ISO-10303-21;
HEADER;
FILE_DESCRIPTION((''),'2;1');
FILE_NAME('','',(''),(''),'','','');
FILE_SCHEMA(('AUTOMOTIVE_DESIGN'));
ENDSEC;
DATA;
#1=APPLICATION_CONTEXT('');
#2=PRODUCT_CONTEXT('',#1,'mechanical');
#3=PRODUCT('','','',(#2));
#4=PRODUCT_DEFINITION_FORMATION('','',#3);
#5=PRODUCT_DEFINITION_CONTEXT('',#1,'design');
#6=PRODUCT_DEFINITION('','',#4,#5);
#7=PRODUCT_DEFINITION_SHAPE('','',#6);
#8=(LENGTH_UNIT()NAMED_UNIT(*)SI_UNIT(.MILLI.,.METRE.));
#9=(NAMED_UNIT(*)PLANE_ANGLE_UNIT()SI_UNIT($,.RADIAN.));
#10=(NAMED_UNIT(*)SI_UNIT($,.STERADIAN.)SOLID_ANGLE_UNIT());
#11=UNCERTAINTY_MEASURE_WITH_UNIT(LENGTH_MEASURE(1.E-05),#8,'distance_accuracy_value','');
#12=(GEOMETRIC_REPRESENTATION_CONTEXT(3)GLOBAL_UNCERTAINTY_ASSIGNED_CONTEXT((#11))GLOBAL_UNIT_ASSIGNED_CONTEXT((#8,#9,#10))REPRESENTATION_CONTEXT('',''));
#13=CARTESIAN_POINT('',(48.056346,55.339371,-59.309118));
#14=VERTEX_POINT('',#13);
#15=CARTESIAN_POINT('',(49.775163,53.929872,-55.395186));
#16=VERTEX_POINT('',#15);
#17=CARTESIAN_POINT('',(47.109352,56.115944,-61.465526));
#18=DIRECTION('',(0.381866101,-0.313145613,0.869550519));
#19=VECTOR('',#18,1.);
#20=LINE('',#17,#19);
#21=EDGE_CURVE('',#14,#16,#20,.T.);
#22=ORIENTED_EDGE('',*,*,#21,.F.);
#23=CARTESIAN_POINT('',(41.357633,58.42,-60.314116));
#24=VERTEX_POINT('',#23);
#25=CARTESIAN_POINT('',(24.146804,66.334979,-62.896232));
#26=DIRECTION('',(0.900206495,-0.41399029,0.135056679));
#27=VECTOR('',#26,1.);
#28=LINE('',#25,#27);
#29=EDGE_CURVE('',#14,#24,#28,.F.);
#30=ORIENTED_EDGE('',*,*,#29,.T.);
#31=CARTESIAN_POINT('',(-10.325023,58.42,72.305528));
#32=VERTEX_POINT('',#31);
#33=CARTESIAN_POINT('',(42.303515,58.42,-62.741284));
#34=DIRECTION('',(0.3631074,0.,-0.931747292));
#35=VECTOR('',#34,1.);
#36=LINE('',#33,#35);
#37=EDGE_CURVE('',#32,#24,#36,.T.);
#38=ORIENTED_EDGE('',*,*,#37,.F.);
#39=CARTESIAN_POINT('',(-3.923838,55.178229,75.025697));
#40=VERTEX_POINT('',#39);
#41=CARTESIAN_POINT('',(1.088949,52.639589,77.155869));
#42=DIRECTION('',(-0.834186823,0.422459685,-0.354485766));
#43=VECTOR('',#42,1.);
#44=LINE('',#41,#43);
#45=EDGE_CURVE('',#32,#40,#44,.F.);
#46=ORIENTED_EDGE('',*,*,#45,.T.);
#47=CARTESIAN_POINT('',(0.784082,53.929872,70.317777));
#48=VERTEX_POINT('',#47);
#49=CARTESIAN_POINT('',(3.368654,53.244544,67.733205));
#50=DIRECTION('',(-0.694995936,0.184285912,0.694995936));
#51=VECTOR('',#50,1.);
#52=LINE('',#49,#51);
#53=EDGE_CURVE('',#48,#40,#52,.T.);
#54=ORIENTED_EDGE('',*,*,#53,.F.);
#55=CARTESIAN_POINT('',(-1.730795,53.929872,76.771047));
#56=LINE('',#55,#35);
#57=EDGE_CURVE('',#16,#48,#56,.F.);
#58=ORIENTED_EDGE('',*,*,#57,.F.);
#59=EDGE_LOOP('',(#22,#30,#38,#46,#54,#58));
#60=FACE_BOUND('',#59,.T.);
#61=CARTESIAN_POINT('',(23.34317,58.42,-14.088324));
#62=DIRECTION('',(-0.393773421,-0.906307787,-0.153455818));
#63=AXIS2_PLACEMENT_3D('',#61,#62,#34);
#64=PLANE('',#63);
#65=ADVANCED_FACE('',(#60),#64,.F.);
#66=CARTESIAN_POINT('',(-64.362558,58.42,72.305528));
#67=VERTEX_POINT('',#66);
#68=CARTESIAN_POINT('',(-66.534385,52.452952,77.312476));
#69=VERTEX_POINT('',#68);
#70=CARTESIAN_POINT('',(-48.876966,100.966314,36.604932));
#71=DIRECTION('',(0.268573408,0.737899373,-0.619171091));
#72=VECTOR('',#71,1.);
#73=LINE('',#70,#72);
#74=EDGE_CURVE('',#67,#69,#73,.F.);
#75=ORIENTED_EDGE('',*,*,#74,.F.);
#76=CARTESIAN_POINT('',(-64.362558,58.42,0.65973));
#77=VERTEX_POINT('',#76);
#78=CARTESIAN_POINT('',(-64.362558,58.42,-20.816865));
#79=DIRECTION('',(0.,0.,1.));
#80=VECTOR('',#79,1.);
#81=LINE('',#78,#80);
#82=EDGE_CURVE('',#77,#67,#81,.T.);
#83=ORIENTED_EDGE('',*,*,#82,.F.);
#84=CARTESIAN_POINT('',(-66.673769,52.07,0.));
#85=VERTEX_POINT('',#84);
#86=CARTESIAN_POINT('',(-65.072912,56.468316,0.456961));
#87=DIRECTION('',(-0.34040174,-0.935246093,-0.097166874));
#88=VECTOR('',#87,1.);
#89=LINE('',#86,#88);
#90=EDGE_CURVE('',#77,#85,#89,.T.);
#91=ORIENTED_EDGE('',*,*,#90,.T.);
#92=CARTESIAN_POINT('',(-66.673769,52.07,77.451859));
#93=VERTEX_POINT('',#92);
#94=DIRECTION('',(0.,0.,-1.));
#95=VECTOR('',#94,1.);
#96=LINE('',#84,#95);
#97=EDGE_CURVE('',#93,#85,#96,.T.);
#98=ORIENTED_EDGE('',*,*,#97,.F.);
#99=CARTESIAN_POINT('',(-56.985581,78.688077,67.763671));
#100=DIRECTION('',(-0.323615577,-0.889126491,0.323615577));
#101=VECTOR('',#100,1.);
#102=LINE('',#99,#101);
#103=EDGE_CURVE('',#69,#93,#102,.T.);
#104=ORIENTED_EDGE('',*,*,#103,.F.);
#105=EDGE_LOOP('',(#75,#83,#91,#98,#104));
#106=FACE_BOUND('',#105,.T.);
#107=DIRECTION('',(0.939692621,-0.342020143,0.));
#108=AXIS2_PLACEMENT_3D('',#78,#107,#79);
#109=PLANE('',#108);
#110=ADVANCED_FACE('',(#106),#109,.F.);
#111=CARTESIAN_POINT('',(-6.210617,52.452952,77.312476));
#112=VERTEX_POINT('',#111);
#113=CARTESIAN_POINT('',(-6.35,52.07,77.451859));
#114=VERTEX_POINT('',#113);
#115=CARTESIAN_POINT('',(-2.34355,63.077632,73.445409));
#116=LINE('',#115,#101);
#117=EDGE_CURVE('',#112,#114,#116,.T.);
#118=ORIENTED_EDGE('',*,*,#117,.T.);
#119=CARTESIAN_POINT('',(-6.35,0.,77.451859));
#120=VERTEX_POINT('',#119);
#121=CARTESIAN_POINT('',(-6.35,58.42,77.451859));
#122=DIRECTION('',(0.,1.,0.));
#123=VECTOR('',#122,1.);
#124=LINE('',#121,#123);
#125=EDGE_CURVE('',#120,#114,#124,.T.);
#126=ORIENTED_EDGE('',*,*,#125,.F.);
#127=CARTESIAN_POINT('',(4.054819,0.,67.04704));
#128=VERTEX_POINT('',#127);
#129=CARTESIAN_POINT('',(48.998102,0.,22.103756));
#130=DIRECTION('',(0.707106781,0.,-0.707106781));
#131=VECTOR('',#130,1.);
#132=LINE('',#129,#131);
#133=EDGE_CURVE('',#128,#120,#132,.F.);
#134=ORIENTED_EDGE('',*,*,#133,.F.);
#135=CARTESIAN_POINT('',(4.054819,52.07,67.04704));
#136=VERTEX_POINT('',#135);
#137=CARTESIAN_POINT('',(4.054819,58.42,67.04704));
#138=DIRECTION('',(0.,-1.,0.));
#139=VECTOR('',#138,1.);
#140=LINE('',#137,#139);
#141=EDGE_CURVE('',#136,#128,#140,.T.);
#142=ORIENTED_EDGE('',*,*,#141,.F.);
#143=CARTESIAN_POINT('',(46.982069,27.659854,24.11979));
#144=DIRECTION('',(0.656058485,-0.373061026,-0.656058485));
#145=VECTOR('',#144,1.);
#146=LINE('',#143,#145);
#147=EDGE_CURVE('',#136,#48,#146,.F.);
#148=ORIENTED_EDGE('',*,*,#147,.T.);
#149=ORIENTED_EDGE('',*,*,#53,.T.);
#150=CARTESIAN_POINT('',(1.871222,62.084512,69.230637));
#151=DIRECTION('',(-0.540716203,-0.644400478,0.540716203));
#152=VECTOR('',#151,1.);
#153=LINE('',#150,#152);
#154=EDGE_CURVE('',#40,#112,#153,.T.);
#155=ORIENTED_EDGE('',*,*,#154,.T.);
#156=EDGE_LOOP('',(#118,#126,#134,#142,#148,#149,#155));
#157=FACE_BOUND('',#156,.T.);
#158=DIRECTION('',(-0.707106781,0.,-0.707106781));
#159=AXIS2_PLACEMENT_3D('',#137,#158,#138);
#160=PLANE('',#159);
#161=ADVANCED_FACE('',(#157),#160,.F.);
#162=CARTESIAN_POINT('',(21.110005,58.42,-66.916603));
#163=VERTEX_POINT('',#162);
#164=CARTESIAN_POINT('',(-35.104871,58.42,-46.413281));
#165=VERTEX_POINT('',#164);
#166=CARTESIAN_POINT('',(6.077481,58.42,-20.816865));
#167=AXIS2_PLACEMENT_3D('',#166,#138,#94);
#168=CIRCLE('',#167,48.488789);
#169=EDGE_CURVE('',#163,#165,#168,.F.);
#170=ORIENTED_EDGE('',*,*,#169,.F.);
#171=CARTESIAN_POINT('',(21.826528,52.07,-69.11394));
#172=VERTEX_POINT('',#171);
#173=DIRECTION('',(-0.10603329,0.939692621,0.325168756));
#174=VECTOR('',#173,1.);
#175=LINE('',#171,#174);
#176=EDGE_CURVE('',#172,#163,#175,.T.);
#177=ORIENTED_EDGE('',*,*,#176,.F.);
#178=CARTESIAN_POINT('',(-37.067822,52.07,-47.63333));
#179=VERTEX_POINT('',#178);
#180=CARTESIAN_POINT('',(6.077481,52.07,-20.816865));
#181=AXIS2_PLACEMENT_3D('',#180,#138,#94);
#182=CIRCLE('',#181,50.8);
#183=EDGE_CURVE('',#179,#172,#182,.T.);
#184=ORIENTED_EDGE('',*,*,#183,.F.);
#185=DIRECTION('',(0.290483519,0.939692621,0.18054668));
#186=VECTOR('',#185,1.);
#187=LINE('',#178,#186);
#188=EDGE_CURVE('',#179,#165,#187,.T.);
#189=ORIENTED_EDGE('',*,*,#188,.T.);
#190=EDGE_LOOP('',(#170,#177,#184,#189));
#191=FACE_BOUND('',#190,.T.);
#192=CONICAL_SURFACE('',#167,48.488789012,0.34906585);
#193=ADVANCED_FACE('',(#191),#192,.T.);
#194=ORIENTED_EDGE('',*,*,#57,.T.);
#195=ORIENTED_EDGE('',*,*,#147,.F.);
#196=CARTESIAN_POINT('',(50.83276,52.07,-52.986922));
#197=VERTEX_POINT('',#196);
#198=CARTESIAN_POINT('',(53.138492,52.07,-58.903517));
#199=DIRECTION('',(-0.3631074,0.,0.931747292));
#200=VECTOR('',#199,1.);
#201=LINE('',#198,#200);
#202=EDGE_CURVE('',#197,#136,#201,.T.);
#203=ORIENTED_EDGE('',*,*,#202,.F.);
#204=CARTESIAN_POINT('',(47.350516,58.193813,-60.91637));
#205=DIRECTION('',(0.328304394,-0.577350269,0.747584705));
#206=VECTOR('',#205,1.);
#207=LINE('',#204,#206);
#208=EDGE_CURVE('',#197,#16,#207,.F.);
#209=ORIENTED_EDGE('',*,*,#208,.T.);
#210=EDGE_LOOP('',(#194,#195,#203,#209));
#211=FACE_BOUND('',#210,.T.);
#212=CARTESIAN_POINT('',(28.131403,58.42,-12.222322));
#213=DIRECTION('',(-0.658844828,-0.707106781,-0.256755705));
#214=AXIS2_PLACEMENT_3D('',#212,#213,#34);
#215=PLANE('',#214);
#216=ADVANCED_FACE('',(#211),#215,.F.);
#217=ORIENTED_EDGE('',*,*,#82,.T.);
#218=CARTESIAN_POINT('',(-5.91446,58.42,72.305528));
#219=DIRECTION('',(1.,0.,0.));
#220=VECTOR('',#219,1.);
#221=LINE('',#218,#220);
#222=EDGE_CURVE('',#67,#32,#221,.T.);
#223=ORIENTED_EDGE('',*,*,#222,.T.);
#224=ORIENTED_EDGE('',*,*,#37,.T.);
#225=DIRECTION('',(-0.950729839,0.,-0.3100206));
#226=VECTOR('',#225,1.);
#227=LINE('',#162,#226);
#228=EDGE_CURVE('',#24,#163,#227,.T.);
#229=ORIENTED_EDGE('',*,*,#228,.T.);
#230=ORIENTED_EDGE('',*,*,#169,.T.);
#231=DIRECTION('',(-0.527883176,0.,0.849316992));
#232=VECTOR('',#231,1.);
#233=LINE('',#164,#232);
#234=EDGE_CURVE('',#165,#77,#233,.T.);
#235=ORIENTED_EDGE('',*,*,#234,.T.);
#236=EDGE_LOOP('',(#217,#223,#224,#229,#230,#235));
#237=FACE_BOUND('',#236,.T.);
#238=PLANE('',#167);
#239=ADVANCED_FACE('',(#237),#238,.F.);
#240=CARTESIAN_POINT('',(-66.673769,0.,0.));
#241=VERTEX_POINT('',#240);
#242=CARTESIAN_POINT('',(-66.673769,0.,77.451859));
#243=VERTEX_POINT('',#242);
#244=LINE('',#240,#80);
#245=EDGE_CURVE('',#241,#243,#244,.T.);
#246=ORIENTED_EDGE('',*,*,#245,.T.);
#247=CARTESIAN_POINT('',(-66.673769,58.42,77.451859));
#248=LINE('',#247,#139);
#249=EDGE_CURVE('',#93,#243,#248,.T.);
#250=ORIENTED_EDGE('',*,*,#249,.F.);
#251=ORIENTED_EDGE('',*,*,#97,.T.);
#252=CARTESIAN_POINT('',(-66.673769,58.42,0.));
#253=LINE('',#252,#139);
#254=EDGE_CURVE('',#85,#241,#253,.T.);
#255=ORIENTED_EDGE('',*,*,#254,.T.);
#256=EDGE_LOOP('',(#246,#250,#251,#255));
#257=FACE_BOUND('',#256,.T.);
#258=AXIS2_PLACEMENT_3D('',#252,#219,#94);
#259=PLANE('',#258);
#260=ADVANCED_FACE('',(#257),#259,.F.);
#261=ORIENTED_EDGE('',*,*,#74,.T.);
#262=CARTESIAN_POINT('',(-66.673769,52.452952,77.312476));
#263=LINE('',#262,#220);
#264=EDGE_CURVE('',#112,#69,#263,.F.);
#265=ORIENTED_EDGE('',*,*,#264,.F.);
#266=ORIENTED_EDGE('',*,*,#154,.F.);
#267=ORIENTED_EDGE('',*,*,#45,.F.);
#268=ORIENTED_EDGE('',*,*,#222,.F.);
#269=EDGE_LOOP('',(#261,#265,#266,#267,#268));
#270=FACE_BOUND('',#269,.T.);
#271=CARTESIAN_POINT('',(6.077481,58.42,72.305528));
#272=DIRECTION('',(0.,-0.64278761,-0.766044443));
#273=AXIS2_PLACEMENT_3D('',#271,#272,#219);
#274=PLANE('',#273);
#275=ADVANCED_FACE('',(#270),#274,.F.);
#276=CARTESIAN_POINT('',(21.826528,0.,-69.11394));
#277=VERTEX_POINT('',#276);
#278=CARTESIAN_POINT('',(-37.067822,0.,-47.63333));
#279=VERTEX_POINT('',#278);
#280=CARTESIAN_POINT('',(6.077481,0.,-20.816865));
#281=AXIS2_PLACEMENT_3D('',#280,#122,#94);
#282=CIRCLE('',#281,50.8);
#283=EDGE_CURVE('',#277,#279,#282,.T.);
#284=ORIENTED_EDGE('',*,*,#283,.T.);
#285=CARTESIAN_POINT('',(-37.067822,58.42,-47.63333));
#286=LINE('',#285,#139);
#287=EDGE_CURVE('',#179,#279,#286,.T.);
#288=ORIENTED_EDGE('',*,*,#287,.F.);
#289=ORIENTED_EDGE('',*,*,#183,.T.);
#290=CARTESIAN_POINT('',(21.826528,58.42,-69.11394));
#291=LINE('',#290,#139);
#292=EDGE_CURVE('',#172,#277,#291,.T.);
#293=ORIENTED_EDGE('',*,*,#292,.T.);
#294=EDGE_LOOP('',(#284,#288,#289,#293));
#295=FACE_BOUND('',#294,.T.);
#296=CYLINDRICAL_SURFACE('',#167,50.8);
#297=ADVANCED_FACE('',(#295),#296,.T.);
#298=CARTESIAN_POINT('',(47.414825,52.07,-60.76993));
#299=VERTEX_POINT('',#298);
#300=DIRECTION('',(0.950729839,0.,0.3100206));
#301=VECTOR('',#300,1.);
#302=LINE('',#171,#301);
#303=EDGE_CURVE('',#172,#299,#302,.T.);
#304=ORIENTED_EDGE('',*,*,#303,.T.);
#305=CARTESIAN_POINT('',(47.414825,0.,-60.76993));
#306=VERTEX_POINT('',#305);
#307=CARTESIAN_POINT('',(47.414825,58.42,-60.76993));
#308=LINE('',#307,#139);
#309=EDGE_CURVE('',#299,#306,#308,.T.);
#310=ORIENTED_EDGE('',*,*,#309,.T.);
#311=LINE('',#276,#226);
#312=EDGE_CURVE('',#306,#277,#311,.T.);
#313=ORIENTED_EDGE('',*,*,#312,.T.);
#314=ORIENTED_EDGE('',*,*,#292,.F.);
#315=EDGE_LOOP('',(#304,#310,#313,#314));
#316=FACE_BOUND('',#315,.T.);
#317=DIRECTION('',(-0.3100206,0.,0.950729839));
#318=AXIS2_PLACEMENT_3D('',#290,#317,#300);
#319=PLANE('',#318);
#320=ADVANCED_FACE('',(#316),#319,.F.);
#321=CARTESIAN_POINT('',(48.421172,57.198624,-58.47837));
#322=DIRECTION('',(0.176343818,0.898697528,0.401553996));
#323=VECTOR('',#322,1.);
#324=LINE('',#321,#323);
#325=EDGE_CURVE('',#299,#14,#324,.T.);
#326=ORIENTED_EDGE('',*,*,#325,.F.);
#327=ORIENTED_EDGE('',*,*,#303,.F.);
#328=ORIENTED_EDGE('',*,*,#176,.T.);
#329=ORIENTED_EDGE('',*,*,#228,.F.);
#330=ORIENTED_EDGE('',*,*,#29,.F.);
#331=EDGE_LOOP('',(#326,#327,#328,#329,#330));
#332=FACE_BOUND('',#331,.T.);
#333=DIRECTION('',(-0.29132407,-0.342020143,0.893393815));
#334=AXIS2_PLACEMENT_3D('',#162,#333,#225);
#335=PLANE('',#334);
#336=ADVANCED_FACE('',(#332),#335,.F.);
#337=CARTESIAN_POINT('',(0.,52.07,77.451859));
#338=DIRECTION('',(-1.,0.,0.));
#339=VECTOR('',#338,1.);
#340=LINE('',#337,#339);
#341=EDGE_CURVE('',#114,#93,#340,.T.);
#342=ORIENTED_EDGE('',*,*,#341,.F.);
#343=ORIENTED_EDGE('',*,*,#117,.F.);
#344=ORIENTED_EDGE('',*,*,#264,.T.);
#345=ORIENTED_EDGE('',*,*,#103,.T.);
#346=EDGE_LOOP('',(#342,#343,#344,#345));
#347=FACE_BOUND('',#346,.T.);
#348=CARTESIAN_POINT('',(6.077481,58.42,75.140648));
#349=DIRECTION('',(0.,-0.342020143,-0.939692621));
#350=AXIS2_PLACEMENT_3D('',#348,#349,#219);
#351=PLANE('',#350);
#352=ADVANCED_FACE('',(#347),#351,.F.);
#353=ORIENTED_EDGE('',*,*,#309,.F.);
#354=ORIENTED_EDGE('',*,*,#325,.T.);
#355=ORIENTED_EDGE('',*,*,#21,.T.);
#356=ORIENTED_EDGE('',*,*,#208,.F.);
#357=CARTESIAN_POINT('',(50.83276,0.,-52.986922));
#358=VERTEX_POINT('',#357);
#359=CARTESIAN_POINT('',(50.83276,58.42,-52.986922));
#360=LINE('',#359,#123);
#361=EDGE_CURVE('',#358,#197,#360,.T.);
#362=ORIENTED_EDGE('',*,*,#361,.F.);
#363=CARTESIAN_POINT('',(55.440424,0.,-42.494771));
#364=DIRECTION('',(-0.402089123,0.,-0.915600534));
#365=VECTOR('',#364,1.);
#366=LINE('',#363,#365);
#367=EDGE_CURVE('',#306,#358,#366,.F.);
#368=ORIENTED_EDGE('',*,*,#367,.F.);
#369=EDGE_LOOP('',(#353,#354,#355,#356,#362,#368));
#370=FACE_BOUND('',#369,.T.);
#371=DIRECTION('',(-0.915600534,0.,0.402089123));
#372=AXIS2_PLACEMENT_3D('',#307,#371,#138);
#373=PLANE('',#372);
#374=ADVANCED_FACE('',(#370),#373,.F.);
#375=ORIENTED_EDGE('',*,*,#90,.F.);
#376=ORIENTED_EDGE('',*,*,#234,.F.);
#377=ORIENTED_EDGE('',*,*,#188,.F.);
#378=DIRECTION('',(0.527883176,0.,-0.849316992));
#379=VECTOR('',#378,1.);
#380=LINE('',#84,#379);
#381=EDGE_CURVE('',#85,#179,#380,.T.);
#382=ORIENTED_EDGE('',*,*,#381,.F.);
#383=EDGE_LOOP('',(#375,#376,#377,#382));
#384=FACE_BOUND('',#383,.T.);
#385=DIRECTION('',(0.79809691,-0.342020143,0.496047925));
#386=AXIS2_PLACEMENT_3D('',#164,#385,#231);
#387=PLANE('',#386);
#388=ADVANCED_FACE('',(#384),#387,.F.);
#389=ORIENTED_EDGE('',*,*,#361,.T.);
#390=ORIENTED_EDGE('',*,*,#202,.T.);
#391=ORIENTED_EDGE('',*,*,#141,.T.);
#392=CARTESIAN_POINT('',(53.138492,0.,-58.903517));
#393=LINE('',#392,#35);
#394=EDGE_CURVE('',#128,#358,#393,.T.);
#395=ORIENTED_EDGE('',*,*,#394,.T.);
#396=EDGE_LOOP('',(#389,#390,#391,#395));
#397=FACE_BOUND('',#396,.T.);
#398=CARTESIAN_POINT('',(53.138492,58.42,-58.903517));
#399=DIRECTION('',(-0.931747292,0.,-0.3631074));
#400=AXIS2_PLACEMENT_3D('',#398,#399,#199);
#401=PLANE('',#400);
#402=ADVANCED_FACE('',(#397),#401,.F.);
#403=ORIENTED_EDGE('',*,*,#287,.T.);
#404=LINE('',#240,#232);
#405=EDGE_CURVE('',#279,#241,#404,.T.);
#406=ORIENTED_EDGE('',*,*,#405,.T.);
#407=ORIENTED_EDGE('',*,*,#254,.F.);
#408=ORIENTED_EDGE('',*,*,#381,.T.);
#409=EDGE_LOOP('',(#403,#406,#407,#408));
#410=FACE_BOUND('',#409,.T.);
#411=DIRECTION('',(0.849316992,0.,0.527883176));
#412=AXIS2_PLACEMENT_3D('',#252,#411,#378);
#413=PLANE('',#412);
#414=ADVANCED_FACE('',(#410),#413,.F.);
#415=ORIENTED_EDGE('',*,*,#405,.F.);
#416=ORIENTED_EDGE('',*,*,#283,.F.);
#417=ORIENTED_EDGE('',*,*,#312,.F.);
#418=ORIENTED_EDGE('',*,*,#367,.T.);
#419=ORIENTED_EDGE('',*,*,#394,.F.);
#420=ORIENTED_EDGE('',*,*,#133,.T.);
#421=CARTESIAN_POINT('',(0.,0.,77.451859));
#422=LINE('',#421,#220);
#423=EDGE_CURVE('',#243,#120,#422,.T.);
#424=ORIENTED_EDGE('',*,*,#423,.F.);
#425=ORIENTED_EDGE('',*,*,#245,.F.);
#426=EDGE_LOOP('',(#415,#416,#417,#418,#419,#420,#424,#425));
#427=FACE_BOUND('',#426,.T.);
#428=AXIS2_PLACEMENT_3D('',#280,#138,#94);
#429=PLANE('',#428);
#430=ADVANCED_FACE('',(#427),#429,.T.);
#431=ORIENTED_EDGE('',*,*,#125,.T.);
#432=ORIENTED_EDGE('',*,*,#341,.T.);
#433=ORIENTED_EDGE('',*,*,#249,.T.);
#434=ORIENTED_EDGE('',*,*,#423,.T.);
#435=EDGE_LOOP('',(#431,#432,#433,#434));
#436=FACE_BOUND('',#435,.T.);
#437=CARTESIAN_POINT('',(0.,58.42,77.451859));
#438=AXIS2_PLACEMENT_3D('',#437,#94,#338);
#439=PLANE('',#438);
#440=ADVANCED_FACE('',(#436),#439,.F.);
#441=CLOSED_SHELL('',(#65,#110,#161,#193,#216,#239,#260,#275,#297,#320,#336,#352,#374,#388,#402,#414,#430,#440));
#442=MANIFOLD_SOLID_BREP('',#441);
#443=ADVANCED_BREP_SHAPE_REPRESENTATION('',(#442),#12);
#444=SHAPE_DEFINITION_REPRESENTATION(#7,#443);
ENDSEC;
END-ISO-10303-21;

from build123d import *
from OCP.BRepFilletAPI import BRepFilletAPI_MakeChamfer

# Parameters (mm, degrees)
BOSS_EXTRUDE1_DEPTH = 58.42
CHAMFER1_SIZE       = 6.35
CHAMFER1_SIZE2      = 6.020287439
CHAMFER1_SIZE2_2    = 11.16699707
CHAMFER2_SIZE       = 6.35
CHAMFER2_SIZE2      = 2.311210988
CHAMFER3_SIZE       = 6.35
CHAMFER3_SIZE_2     = 5.138982639
CHAMFER3_SIZE_3     = 2.835119985
CHAMFER3_SIZE_4     = 2.311210988


with BuildPart() as part:
    # Sketch1 → Boss-Extrude1 (new body)
    with BuildSketch(Plane(origin=(0, 0, 0), x_dir=(1, 0, 0), z_dir=(0, 1, 0))):
        with BuildLine():
            Line((-66.673768512, 0), (-37.067821873, 47.633329988))
            ThreePointArc((-37.067821873, 47.633329988), (-11.329209284, 68.541566023), (21.82652777, 69.113940477))
            Line((21.82652777, 69.113940477), (53.138492197, 58.903517294))
            Line((53.138492197, 58.903517294), (0, -77.45185891))
            Line((0, -77.45185891), (-66.673768512, -77.45185891))
            Line((-66.673768512, -77.45185891), (-66.673768512, 0))
        make_face()
    extrude(amount=BOSS_EXTRUDE1_DEPTH)

    # Chamfer1: one chamfer whose edges measure the first distance from different faces: ONE call of the kernel's chamfer builder (chamfer() names one face for all edges)
    chamfer1_edges_1 = [part.edges().sort_by_distance(p)[0] for p in [
        (26.569246099, 58.42, 9.274170808),
    ]]
    chamfer1_edges_2 = [part.edges().sort_by_distance(p)[0] for p in [
        (53.138492197, 29.21, -58.903517294),
    ]]
    chamfer1_side_2 = [part.faces().sort_by_distance(p)[0] for p in [
        (26.569246099, 29.21, 9.274170808),
    ]]
    chamfer1_edges_3 = [part.edges().sort_by_distance(p)[0] for p in [
        (0, 29.21, 77.45185891),
    ]]
    chamfer1_side_3 = [part.faces().sort_by_distance(p)[0] for p in [
        (-33.336884256, 29.21, 77.45185891),
    ]]
    chamfer1 = BRepFilletAPI_MakeChamfer(part.part.solid().wrapped)
    for e in chamfer1_edges_1:
        chamfer1.Add(CHAMFER1_SIZE, e.wrapped)
    for e in chamfer1_edges_2:
        chamfer1.Add(CHAMFER1_SIZE, CHAMFER1_SIZE2, e.wrapped, chamfer1_side_2[0].wrapped)  # the first distance lies on this face
    for e in chamfer1_edges_3:
        chamfer1.Add(CHAMFER1_SIZE, CHAMFER1_SIZE2_2, e.wrapped, chamfer1_side_3[0].wrapped)  # the first distance lies on this face
    add(Compound.cast(chamfer1.Shape()), mode=Mode.REPLACE)

    # Chamfer2
    chamfer2_edges = [part.edges().sort_by_distance(p)[0] for p in [
        (-36.744460568, 58.42, 77.45185891),
    ]]
    chamfer2_side = [part.faces().sort_by_distance(p)[0] for p in [
        (-36.512742561, 29.20916862, 77.45185891),
    ]]
    chamfer(chamfer2_edges, length=CHAMFER2_SIZE, length2=CHAMFER2_SIZE2, reference=chamfer2_side[0])

    # Chamfer3
    # the kernel refuses this chamfer: 6.35, 5.138982639, 2.835119985, 2.311210988 mm, written as the material it takes off along each edge
    with BuildSketch(Plane(origin=(53.073265581, 58.42, -76.224082144), x_dir=(0.6674738144333207, -0.6977227871251095, 0.2601184718012205), z_dir=(-0.3631074004698769, 0, 0.9317472917717596))) as chamfer3_piece_1:
        Polygon((CHAMFER3_SIZE * 0.999913086528, -CHAMFER3_SIZE * 0.0131840581986), (-CHAMFER3_SIZE_2 * 0.716367861072, -CHAMFER3_SIZE_2 * 0.69772278716), (0, 0), align=None)
    extrude(amount=178.925693595, mode=Mode.SUBTRACT)
    with BuildSketch(Plane(origin=(10.558676445, 58.42, 75.140647923), x_dir=(0, -0.9351017353626564, 0.3543793793687052), z_dir=(-1, 0, 0))) as chamfer3_piece_2:
        Polygon((CHAMFER3_SIZE * 0.999913086528, -CHAMFER3_SIZE * 0.0131840581986), (-CHAMFER3_SIZE_3 * 0.354379379374, -CHAMFER3_SIZE_3 * 0.935101735377), (0, 0), align=None)
    extrude(amount=93.705581509, mode=Mode.SUBTRACT)
    with BuildSketch(Plane(origin=(21.82652777, 58.42, -69.113940477), x_dir=(-0.3084963411353717, 0.09904090225204967, 0.946055446148474), z_dir=(0.9507298394814789, 0, 0.3100205998309168))) as chamfer3_piece_3:
        Polygon((CHAMFER3_SIZE_4 * 0.995083363005, CHAMFER3_SIZE_4 * 0.0990409022345), (-CHAMFER3_SIZE * 0.099040902252, CHAMFER3_SIZE * 0.995083363182), (0, 0), align=None)
    extrude(amount=43.047689039, mode=Mode.SUBTRACT)
    with BuildSketch(Plane(origin=(6.077481299, 58.42, -20.816864631), x_dir=(-0.849316991574707, 0, -0.5278831763018113), z_dir=(-0.5278831763018113, 0, 0.849316991574707))) as chamfer3_piece_4:
        Polygon((50.8 - CHAMFER3_SIZE_4, 0), (50.8, CHAMFER3_SIZE), (50.8, 0), align=None)
    revolve(axis=Axis((6.077481299, 58.42, -20.816864631), (0, -1, 0)), revolution_arc=76.197931096, mode=Mode.SUBTRACT)
    with BuildSketch(Plane(origin=(-75.369660158, 58.42, 13.990914778), x_dir=(0.8451412083835613, 0.0990409022520497, 0.5252877664414751), z_dir=(0.5278831763018161, 0, -0.849316991574704))) as chamfer3_piece_5:
        Polygon((CHAMFER3_SIZE_4 * 0.995083363005, CHAMFER3_SIZE_4 * 0.0990409022345), (-CHAMFER3_SIZE * 0.0990409022521, CHAMFER3_SIZE * 0.995083363182), (0, 0), align=None)
    extrude(amount=72.557414224, mode=Mode.SUBTRACT)
    with BuildSketch(Plane(origin=(-66.673768512, 58.42, 91.613784474), x_dir=(0.9950833631817486, 0.09904090225205003, 0), z_dir=(0, 0, -1))) as chamfer3_piece_6:
        Polygon((CHAMFER3_SIZE_4 * 0.995083363005, CHAMFER3_SIZE_4 * 0.0990409022345), (-CHAMFER3_SIZE * 0.0990409022521, CHAMFER3_SIZE * 0.995083363182), (0, 0), align=None)
    extrude(amount=108.086921026, mode=Mode.SUBTRACT)


solid = part.part
